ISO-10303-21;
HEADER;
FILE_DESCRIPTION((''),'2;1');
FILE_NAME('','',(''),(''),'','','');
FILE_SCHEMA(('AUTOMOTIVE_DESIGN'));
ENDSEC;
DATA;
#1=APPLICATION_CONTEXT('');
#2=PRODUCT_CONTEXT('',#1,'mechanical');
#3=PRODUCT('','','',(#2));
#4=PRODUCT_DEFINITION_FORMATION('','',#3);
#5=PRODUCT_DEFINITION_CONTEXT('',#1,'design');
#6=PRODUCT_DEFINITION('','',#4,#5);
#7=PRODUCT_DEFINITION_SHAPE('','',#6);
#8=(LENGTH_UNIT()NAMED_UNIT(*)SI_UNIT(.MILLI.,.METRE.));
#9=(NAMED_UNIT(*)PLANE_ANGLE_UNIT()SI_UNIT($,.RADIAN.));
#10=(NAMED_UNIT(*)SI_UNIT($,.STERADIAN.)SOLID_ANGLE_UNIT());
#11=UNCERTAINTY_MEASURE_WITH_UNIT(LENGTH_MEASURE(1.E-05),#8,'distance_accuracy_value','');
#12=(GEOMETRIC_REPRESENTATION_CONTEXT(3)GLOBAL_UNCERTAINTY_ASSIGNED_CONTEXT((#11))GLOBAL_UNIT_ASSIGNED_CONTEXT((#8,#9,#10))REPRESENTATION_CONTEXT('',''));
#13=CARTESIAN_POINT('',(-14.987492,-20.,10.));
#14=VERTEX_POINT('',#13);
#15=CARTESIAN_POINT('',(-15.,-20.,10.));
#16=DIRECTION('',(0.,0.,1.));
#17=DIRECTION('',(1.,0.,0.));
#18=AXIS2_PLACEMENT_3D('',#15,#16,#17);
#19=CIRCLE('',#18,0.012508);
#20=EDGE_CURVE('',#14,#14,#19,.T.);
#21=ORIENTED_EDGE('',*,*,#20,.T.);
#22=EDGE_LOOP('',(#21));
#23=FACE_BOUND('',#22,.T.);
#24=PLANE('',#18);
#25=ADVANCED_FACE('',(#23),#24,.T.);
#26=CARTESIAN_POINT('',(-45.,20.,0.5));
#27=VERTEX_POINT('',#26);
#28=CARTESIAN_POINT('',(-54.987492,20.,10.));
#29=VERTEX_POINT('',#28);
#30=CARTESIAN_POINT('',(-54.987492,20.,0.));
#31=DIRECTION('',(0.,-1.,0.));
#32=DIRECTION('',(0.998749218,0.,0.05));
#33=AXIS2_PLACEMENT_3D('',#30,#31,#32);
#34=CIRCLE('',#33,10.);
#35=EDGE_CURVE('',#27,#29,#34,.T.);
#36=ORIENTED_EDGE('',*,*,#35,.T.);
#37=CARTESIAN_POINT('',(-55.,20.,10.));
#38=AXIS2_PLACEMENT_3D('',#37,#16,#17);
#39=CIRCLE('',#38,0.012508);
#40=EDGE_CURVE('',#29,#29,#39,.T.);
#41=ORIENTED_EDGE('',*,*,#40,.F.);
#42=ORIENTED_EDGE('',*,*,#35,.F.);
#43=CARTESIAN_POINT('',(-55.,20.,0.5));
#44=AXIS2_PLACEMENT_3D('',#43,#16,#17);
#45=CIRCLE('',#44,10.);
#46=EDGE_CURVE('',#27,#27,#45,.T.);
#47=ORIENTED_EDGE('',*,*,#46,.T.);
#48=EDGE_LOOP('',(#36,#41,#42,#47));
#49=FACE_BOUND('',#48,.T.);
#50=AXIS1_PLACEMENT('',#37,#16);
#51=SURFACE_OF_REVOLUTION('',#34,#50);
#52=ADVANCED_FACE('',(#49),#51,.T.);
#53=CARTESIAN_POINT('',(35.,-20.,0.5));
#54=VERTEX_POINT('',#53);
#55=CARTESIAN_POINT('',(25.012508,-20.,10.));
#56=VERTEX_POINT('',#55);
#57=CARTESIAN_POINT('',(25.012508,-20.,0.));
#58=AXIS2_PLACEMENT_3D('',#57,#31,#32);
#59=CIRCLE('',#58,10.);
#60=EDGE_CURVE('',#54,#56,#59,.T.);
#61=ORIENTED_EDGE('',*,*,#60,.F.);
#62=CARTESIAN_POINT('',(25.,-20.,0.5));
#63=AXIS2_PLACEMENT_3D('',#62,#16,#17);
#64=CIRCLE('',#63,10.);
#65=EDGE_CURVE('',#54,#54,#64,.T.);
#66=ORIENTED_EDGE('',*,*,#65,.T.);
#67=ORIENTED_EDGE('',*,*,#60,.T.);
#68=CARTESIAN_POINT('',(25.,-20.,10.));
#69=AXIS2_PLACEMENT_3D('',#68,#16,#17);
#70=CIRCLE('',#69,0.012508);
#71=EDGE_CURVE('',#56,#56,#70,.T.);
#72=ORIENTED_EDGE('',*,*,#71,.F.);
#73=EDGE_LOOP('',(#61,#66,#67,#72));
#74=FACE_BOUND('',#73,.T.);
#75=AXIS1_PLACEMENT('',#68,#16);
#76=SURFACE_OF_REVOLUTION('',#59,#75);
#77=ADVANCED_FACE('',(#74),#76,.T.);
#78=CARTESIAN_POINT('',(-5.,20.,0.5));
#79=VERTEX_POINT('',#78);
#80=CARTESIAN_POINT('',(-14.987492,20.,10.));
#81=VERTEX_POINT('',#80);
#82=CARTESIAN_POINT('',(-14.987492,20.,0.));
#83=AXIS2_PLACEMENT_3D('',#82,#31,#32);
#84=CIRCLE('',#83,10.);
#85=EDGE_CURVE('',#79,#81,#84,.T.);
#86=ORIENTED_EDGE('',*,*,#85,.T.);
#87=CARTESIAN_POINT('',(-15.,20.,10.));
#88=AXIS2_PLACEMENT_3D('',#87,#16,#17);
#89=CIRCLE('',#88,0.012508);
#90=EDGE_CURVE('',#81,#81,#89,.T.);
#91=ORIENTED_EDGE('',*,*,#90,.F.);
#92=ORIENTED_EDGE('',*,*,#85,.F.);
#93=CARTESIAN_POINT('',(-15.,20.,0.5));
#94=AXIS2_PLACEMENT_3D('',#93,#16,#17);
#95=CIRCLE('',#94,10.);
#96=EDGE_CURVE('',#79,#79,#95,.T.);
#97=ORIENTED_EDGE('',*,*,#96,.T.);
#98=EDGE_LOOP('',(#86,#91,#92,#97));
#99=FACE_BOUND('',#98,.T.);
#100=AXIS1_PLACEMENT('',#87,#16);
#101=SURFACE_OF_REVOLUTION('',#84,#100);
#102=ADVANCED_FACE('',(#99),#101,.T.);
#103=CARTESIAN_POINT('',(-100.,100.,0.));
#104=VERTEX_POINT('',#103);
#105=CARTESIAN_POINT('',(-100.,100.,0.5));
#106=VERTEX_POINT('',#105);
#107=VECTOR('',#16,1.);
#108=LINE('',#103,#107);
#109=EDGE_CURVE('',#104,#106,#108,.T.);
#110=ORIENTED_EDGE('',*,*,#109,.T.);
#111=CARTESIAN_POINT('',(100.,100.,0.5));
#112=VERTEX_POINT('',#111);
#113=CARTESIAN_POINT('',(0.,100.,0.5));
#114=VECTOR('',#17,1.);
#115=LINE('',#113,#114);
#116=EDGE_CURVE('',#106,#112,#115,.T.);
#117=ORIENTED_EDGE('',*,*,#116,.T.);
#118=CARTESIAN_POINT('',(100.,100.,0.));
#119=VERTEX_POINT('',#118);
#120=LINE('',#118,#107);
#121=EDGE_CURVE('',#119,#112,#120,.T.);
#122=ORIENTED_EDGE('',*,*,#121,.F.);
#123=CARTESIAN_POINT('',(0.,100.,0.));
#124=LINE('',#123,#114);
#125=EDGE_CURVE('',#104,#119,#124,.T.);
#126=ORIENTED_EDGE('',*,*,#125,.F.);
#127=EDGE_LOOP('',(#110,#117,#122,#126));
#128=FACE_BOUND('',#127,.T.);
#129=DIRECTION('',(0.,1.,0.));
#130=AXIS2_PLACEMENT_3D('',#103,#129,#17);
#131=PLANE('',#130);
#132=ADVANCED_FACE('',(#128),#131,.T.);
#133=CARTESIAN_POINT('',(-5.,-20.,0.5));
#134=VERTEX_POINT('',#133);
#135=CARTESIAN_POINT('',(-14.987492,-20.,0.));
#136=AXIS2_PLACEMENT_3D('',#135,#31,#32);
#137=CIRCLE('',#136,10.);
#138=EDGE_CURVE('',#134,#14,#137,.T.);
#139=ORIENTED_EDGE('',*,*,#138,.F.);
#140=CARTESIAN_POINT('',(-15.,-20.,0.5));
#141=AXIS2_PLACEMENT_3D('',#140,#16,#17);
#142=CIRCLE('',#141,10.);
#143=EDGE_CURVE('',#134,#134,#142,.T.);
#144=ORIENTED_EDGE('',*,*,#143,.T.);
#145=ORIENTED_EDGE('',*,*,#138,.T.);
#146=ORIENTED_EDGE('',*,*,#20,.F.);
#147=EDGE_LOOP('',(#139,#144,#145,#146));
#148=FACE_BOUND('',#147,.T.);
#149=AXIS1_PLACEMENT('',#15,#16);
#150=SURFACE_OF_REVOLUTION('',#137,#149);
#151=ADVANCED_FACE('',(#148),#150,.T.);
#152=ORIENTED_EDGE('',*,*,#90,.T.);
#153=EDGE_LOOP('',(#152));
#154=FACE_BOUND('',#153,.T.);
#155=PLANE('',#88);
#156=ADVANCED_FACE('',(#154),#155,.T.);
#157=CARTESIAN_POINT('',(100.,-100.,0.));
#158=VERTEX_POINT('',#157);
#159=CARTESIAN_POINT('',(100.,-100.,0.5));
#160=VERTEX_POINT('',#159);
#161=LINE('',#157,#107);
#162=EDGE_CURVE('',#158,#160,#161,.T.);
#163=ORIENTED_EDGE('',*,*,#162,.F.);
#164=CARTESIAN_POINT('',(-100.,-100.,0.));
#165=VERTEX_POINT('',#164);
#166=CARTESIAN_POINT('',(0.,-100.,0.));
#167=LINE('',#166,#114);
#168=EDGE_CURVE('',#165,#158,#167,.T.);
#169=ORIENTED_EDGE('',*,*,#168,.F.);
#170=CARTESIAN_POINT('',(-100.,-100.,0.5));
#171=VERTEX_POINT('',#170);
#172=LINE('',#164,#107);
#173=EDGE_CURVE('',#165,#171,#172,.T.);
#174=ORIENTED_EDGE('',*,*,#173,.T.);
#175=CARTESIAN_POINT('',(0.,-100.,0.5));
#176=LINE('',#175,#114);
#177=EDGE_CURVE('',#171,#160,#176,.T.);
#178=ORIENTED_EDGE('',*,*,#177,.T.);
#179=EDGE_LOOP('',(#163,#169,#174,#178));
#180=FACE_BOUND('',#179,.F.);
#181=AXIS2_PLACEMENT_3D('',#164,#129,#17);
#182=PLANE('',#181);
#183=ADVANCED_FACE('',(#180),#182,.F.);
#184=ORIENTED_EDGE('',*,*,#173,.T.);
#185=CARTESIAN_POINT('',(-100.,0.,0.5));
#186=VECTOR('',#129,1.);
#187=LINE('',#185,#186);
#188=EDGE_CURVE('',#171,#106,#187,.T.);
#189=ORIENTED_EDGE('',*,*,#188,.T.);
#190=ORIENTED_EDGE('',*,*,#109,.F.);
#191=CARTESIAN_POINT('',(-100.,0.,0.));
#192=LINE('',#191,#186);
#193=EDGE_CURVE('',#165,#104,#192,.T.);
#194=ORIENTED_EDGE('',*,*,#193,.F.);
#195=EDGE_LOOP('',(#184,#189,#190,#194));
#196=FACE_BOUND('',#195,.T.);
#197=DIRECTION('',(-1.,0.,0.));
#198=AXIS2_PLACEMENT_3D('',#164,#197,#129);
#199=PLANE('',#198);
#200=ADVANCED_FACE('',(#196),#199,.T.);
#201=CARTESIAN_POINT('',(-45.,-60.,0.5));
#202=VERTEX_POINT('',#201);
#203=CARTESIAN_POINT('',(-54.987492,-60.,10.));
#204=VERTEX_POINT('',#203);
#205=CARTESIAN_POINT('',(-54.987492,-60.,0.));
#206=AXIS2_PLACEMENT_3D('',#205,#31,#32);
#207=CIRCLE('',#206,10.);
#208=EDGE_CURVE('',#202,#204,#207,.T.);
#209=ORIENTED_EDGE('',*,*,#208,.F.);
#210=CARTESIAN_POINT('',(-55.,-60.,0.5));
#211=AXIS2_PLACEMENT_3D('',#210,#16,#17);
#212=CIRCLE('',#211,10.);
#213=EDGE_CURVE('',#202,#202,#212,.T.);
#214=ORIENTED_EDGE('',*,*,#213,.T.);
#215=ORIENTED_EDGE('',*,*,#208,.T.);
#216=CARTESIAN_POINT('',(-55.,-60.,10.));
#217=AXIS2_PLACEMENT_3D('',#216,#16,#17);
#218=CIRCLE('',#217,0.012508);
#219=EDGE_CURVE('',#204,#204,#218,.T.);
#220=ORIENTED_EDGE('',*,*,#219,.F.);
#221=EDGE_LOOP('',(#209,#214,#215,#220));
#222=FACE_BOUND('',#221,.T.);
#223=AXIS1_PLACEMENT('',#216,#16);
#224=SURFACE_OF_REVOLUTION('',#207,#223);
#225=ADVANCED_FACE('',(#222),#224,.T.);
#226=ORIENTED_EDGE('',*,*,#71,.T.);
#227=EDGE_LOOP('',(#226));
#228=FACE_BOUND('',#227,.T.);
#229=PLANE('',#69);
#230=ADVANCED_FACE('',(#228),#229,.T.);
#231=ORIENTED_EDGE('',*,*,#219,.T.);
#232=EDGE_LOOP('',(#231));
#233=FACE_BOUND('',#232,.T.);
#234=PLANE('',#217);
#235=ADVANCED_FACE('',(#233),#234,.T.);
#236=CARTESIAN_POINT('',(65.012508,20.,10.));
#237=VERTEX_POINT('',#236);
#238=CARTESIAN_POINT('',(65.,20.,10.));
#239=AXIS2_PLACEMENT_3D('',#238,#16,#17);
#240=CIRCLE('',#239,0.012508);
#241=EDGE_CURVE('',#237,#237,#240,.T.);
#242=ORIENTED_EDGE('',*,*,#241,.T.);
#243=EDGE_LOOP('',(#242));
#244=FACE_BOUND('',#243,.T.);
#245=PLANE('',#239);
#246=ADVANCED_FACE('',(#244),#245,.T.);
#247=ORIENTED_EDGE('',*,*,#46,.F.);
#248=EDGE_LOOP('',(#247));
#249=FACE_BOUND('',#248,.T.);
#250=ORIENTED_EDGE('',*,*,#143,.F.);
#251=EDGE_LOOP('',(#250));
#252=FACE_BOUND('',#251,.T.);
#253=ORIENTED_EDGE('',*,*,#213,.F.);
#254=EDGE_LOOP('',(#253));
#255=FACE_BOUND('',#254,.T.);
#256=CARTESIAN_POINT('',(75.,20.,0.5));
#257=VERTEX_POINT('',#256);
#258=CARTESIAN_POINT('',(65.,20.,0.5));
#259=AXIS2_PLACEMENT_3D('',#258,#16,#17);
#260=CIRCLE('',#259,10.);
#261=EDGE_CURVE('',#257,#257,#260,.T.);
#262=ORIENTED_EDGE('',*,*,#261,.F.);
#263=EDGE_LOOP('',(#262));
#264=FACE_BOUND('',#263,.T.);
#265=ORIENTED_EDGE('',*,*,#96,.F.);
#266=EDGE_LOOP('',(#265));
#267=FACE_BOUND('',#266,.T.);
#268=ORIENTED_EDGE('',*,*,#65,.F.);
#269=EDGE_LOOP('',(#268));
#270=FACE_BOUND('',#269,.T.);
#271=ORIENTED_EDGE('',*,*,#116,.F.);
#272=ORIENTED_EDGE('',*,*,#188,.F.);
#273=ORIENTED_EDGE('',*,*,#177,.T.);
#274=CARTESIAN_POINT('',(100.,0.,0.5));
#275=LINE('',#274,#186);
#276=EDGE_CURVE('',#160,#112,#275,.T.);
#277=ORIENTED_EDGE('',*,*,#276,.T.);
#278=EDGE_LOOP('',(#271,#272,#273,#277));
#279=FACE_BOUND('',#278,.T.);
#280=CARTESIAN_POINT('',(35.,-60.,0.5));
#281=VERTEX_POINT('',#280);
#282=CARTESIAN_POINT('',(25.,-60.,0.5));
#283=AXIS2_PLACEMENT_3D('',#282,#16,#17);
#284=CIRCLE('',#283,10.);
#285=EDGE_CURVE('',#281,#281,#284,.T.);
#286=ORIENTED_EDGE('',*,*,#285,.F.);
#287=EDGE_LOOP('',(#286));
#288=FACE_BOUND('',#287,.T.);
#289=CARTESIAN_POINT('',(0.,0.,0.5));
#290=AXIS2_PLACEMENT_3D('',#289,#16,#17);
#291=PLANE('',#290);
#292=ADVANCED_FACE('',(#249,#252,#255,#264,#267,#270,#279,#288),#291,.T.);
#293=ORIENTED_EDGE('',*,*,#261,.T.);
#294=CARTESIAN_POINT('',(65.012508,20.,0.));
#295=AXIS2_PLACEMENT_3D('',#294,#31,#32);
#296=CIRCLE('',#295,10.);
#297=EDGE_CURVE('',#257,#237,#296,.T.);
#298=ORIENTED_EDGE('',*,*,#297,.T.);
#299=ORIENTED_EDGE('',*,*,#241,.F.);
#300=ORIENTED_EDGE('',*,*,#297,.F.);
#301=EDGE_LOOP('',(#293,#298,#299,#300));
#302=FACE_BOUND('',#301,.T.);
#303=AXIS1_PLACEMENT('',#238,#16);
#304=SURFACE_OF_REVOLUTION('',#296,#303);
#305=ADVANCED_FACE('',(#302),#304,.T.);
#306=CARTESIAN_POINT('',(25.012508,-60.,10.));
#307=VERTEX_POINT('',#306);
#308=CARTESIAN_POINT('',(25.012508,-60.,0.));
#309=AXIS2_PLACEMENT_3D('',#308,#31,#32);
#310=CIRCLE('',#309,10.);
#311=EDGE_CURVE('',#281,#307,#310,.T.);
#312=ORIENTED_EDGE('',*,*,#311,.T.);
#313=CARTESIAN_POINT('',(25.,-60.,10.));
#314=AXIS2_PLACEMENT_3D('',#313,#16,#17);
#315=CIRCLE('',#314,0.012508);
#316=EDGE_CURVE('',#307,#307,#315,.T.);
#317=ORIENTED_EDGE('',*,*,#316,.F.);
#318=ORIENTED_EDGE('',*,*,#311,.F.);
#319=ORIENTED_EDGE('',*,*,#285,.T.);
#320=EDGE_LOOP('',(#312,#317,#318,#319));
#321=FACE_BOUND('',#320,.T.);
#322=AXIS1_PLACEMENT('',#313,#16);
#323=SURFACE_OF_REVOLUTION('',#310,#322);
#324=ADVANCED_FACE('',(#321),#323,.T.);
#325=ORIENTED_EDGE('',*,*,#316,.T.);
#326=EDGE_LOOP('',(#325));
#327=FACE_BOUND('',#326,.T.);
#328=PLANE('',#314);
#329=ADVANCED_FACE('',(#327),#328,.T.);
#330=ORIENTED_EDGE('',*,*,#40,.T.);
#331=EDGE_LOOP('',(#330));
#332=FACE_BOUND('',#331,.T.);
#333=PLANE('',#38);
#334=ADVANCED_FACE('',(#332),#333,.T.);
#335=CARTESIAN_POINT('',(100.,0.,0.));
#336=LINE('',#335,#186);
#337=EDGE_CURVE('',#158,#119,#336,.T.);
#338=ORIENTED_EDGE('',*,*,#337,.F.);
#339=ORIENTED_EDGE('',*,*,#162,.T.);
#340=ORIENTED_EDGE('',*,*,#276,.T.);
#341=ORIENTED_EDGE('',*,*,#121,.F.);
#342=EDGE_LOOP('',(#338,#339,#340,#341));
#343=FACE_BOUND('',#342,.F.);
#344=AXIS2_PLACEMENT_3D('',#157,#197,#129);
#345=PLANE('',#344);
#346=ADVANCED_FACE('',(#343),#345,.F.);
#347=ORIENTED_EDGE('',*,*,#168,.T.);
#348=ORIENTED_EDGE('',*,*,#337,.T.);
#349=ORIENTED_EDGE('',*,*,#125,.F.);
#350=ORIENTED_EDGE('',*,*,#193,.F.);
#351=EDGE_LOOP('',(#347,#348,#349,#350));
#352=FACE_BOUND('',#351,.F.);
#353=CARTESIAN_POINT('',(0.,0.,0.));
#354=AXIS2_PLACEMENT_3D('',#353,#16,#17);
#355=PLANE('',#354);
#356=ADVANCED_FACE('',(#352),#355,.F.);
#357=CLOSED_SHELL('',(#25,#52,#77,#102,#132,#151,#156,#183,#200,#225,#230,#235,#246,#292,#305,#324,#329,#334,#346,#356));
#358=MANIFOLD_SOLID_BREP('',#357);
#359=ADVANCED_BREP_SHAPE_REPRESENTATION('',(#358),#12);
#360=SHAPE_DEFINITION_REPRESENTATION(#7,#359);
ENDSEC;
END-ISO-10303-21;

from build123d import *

# Parameters (mm, degrees)
F1_W     = 200
F1_H     = 200
F1_R     = 10
F2_DEPTH = 0.5
F3_DEPTH = 10


# Not quite as in the source:
# - a fillet or chamfer that OpenCascade refuses, or shapes differently, is made with other operations: its cross-section is extruded or revolved along the edge and cut away or added


with BuildPart() as f2:
    # F1 (on face) → F2 (new body)
    with BuildSketch(Plane.XY):
        Rectangle(F1_W, F1_H)
        with Locations((-55, -60)):
            Circle(F1_R, mode=Mode.SUBTRACT)
        with Locations((-15, -20)):
            Circle(F1_R, mode=Mode.SUBTRACT)
        with Locations((25, -60)):
            Circle(F1_R, mode=Mode.SUBTRACT)
        with Locations((25, -20)):
            Circle(F1_R, mode=Mode.SUBTRACT)
        with Locations((-55, 20)):
            Circle(F1_R, mode=Mode.SUBTRACT)
        with Locations((-15, 20)):
            Circle(F1_R, mode=Mode.SUBTRACT)
        with Locations((65, 20)):
            Circle(F1_R, mode=Mode.SUBTRACT)
    extrude(amount=F2_DEPTH)

    # F1 (on face) → F3 (join)
    with BuildSketch(Plane.XY):
        with Locations((-55, -60)):
            Circle(F1_R)
        with Locations((-55, 20)):
            Circle(F1_R)
        with Locations((-15, -20)):
            Circle(F1_R)
        with Locations((-15, 20)):
            Circle(F1_R)
        with Locations((25, -60)):
            Circle(F1_R)
        with Locations((25, -20)):
            Circle(F1_R)
        with Locations((65, 20)):
            Circle(F1_R)
    extrude(amount=F3_DEPTH)

    # F4: fillet of radius 10 on 7 edges, made by hand

    # F4_s1 → F4_t2 (revolve, cut)
    with BuildSketch(Plane.XZ.offset(-20)):
        with BuildLine():
            ThreePointArc((-45, 0.5), (-48.0954678017, 7.2456883731), (-54.9874921777, 10))
            Line((-54.9874921777, 10), (-45, 10))
            Line((-45, 10), (-45, 0.5))
        make_face()
    revolve(axis=Axis((-55, 20, 10), (0, 0, 1)), mode=Mode.SUBTRACT)

    # F4_s3 → F4_t4 (revolve, cut)
    with BuildSketch(Plane.XZ.offset(-20)):
        with BuildLine():
            ThreePointArc((-5, 0.5), (-8.0954678017, 7.2456883731), (-14.9874921777, 10))
            Line((-14.9874921777, 10), (-5, 10))
            Line((-5, 10), (-5, 0.5))
        make_face()
    revolve(axis=Axis((-15, 20, 10), (0, 0, 1)), mode=Mode.SUBTRACT)

    # F4_s5 → F4_t6 (revolve, cut)
    with BuildSketch(Plane.XZ.offset(-20)):
        with BuildLine():
            ThreePointArc((75, 0.5), (71.9045321983, 7.2456883731), (65.0125078223, 10))
            Line((65.0125078223, 10), (75, 10))
            Line((75, 10), (75, 0.5))
        make_face()
    revolve(axis=Axis((65, 20, 10), (0, 0, 1)), mode=Mode.SUBTRACT)

    # F4_s7 → F4_t8 (revolve, cut)
    with BuildSketch(Plane.XZ.offset(20)):
        with BuildLine():
            ThreePointArc((35, 0.5), (31.9045321983, 7.2456883731), (25.0125078223, 10))
            Line((25.0125078223, 10), (35, 10))
            Line((35, 10), (35, 0.5))
        make_face()
    revolve(axis=Axis((25, -20, 10), (0, 0, 1)), mode=Mode.SUBTRACT)

    # F4_s9 → F4_t10 (revolve, cut)
    with BuildSketch(Plane.XZ.offset(20)):
        with BuildLine():
            ThreePointArc((-5, 0.5), (-8.0954678017, 7.2456883731), (-14.9874921777, 10))
            Line((-14.9874921777, 10), (-5, 10))
            Line((-5, 10), (-5, 0.5))
        make_face()
    revolve(axis=Axis((-15, -20, 10), (0, 0, 1)), mode=Mode.SUBTRACT)

    # F4_s11 → F4_t12 (revolve, cut)
    with BuildSketch(Plane.XZ.offset(60)):
        with BuildLine():
            ThreePointArc((-45, 0.5), (-48.0954678017, 7.2456883731), (-54.9874921777, 10))
            Line((-54.9874921777, 10), (-45, 10))
            Line((-45, 10), (-45, 0.5))
        make_face()
    revolve(axis=Axis((-55, -60, 10), (0, 0, 1)), mode=Mode.SUBTRACT)

    # F4_s13 → F4_t14 (revolve, cut)
    with BuildSketch(Plane.XZ.offset(60)):
        with BuildLine():
            ThreePointArc((35, 0.5), (31.9045321983, 7.2456883731), (25.0125078223, 10))
            Line((25.0125078223, 10), (35, 10))
            Line((35, 10), (35, 0.5))
        make_face()
    revolve(axis=Axis((25, -60, 10), (0, 0, 1)), mode=Mode.SUBTRACT)


solid = f2.part
